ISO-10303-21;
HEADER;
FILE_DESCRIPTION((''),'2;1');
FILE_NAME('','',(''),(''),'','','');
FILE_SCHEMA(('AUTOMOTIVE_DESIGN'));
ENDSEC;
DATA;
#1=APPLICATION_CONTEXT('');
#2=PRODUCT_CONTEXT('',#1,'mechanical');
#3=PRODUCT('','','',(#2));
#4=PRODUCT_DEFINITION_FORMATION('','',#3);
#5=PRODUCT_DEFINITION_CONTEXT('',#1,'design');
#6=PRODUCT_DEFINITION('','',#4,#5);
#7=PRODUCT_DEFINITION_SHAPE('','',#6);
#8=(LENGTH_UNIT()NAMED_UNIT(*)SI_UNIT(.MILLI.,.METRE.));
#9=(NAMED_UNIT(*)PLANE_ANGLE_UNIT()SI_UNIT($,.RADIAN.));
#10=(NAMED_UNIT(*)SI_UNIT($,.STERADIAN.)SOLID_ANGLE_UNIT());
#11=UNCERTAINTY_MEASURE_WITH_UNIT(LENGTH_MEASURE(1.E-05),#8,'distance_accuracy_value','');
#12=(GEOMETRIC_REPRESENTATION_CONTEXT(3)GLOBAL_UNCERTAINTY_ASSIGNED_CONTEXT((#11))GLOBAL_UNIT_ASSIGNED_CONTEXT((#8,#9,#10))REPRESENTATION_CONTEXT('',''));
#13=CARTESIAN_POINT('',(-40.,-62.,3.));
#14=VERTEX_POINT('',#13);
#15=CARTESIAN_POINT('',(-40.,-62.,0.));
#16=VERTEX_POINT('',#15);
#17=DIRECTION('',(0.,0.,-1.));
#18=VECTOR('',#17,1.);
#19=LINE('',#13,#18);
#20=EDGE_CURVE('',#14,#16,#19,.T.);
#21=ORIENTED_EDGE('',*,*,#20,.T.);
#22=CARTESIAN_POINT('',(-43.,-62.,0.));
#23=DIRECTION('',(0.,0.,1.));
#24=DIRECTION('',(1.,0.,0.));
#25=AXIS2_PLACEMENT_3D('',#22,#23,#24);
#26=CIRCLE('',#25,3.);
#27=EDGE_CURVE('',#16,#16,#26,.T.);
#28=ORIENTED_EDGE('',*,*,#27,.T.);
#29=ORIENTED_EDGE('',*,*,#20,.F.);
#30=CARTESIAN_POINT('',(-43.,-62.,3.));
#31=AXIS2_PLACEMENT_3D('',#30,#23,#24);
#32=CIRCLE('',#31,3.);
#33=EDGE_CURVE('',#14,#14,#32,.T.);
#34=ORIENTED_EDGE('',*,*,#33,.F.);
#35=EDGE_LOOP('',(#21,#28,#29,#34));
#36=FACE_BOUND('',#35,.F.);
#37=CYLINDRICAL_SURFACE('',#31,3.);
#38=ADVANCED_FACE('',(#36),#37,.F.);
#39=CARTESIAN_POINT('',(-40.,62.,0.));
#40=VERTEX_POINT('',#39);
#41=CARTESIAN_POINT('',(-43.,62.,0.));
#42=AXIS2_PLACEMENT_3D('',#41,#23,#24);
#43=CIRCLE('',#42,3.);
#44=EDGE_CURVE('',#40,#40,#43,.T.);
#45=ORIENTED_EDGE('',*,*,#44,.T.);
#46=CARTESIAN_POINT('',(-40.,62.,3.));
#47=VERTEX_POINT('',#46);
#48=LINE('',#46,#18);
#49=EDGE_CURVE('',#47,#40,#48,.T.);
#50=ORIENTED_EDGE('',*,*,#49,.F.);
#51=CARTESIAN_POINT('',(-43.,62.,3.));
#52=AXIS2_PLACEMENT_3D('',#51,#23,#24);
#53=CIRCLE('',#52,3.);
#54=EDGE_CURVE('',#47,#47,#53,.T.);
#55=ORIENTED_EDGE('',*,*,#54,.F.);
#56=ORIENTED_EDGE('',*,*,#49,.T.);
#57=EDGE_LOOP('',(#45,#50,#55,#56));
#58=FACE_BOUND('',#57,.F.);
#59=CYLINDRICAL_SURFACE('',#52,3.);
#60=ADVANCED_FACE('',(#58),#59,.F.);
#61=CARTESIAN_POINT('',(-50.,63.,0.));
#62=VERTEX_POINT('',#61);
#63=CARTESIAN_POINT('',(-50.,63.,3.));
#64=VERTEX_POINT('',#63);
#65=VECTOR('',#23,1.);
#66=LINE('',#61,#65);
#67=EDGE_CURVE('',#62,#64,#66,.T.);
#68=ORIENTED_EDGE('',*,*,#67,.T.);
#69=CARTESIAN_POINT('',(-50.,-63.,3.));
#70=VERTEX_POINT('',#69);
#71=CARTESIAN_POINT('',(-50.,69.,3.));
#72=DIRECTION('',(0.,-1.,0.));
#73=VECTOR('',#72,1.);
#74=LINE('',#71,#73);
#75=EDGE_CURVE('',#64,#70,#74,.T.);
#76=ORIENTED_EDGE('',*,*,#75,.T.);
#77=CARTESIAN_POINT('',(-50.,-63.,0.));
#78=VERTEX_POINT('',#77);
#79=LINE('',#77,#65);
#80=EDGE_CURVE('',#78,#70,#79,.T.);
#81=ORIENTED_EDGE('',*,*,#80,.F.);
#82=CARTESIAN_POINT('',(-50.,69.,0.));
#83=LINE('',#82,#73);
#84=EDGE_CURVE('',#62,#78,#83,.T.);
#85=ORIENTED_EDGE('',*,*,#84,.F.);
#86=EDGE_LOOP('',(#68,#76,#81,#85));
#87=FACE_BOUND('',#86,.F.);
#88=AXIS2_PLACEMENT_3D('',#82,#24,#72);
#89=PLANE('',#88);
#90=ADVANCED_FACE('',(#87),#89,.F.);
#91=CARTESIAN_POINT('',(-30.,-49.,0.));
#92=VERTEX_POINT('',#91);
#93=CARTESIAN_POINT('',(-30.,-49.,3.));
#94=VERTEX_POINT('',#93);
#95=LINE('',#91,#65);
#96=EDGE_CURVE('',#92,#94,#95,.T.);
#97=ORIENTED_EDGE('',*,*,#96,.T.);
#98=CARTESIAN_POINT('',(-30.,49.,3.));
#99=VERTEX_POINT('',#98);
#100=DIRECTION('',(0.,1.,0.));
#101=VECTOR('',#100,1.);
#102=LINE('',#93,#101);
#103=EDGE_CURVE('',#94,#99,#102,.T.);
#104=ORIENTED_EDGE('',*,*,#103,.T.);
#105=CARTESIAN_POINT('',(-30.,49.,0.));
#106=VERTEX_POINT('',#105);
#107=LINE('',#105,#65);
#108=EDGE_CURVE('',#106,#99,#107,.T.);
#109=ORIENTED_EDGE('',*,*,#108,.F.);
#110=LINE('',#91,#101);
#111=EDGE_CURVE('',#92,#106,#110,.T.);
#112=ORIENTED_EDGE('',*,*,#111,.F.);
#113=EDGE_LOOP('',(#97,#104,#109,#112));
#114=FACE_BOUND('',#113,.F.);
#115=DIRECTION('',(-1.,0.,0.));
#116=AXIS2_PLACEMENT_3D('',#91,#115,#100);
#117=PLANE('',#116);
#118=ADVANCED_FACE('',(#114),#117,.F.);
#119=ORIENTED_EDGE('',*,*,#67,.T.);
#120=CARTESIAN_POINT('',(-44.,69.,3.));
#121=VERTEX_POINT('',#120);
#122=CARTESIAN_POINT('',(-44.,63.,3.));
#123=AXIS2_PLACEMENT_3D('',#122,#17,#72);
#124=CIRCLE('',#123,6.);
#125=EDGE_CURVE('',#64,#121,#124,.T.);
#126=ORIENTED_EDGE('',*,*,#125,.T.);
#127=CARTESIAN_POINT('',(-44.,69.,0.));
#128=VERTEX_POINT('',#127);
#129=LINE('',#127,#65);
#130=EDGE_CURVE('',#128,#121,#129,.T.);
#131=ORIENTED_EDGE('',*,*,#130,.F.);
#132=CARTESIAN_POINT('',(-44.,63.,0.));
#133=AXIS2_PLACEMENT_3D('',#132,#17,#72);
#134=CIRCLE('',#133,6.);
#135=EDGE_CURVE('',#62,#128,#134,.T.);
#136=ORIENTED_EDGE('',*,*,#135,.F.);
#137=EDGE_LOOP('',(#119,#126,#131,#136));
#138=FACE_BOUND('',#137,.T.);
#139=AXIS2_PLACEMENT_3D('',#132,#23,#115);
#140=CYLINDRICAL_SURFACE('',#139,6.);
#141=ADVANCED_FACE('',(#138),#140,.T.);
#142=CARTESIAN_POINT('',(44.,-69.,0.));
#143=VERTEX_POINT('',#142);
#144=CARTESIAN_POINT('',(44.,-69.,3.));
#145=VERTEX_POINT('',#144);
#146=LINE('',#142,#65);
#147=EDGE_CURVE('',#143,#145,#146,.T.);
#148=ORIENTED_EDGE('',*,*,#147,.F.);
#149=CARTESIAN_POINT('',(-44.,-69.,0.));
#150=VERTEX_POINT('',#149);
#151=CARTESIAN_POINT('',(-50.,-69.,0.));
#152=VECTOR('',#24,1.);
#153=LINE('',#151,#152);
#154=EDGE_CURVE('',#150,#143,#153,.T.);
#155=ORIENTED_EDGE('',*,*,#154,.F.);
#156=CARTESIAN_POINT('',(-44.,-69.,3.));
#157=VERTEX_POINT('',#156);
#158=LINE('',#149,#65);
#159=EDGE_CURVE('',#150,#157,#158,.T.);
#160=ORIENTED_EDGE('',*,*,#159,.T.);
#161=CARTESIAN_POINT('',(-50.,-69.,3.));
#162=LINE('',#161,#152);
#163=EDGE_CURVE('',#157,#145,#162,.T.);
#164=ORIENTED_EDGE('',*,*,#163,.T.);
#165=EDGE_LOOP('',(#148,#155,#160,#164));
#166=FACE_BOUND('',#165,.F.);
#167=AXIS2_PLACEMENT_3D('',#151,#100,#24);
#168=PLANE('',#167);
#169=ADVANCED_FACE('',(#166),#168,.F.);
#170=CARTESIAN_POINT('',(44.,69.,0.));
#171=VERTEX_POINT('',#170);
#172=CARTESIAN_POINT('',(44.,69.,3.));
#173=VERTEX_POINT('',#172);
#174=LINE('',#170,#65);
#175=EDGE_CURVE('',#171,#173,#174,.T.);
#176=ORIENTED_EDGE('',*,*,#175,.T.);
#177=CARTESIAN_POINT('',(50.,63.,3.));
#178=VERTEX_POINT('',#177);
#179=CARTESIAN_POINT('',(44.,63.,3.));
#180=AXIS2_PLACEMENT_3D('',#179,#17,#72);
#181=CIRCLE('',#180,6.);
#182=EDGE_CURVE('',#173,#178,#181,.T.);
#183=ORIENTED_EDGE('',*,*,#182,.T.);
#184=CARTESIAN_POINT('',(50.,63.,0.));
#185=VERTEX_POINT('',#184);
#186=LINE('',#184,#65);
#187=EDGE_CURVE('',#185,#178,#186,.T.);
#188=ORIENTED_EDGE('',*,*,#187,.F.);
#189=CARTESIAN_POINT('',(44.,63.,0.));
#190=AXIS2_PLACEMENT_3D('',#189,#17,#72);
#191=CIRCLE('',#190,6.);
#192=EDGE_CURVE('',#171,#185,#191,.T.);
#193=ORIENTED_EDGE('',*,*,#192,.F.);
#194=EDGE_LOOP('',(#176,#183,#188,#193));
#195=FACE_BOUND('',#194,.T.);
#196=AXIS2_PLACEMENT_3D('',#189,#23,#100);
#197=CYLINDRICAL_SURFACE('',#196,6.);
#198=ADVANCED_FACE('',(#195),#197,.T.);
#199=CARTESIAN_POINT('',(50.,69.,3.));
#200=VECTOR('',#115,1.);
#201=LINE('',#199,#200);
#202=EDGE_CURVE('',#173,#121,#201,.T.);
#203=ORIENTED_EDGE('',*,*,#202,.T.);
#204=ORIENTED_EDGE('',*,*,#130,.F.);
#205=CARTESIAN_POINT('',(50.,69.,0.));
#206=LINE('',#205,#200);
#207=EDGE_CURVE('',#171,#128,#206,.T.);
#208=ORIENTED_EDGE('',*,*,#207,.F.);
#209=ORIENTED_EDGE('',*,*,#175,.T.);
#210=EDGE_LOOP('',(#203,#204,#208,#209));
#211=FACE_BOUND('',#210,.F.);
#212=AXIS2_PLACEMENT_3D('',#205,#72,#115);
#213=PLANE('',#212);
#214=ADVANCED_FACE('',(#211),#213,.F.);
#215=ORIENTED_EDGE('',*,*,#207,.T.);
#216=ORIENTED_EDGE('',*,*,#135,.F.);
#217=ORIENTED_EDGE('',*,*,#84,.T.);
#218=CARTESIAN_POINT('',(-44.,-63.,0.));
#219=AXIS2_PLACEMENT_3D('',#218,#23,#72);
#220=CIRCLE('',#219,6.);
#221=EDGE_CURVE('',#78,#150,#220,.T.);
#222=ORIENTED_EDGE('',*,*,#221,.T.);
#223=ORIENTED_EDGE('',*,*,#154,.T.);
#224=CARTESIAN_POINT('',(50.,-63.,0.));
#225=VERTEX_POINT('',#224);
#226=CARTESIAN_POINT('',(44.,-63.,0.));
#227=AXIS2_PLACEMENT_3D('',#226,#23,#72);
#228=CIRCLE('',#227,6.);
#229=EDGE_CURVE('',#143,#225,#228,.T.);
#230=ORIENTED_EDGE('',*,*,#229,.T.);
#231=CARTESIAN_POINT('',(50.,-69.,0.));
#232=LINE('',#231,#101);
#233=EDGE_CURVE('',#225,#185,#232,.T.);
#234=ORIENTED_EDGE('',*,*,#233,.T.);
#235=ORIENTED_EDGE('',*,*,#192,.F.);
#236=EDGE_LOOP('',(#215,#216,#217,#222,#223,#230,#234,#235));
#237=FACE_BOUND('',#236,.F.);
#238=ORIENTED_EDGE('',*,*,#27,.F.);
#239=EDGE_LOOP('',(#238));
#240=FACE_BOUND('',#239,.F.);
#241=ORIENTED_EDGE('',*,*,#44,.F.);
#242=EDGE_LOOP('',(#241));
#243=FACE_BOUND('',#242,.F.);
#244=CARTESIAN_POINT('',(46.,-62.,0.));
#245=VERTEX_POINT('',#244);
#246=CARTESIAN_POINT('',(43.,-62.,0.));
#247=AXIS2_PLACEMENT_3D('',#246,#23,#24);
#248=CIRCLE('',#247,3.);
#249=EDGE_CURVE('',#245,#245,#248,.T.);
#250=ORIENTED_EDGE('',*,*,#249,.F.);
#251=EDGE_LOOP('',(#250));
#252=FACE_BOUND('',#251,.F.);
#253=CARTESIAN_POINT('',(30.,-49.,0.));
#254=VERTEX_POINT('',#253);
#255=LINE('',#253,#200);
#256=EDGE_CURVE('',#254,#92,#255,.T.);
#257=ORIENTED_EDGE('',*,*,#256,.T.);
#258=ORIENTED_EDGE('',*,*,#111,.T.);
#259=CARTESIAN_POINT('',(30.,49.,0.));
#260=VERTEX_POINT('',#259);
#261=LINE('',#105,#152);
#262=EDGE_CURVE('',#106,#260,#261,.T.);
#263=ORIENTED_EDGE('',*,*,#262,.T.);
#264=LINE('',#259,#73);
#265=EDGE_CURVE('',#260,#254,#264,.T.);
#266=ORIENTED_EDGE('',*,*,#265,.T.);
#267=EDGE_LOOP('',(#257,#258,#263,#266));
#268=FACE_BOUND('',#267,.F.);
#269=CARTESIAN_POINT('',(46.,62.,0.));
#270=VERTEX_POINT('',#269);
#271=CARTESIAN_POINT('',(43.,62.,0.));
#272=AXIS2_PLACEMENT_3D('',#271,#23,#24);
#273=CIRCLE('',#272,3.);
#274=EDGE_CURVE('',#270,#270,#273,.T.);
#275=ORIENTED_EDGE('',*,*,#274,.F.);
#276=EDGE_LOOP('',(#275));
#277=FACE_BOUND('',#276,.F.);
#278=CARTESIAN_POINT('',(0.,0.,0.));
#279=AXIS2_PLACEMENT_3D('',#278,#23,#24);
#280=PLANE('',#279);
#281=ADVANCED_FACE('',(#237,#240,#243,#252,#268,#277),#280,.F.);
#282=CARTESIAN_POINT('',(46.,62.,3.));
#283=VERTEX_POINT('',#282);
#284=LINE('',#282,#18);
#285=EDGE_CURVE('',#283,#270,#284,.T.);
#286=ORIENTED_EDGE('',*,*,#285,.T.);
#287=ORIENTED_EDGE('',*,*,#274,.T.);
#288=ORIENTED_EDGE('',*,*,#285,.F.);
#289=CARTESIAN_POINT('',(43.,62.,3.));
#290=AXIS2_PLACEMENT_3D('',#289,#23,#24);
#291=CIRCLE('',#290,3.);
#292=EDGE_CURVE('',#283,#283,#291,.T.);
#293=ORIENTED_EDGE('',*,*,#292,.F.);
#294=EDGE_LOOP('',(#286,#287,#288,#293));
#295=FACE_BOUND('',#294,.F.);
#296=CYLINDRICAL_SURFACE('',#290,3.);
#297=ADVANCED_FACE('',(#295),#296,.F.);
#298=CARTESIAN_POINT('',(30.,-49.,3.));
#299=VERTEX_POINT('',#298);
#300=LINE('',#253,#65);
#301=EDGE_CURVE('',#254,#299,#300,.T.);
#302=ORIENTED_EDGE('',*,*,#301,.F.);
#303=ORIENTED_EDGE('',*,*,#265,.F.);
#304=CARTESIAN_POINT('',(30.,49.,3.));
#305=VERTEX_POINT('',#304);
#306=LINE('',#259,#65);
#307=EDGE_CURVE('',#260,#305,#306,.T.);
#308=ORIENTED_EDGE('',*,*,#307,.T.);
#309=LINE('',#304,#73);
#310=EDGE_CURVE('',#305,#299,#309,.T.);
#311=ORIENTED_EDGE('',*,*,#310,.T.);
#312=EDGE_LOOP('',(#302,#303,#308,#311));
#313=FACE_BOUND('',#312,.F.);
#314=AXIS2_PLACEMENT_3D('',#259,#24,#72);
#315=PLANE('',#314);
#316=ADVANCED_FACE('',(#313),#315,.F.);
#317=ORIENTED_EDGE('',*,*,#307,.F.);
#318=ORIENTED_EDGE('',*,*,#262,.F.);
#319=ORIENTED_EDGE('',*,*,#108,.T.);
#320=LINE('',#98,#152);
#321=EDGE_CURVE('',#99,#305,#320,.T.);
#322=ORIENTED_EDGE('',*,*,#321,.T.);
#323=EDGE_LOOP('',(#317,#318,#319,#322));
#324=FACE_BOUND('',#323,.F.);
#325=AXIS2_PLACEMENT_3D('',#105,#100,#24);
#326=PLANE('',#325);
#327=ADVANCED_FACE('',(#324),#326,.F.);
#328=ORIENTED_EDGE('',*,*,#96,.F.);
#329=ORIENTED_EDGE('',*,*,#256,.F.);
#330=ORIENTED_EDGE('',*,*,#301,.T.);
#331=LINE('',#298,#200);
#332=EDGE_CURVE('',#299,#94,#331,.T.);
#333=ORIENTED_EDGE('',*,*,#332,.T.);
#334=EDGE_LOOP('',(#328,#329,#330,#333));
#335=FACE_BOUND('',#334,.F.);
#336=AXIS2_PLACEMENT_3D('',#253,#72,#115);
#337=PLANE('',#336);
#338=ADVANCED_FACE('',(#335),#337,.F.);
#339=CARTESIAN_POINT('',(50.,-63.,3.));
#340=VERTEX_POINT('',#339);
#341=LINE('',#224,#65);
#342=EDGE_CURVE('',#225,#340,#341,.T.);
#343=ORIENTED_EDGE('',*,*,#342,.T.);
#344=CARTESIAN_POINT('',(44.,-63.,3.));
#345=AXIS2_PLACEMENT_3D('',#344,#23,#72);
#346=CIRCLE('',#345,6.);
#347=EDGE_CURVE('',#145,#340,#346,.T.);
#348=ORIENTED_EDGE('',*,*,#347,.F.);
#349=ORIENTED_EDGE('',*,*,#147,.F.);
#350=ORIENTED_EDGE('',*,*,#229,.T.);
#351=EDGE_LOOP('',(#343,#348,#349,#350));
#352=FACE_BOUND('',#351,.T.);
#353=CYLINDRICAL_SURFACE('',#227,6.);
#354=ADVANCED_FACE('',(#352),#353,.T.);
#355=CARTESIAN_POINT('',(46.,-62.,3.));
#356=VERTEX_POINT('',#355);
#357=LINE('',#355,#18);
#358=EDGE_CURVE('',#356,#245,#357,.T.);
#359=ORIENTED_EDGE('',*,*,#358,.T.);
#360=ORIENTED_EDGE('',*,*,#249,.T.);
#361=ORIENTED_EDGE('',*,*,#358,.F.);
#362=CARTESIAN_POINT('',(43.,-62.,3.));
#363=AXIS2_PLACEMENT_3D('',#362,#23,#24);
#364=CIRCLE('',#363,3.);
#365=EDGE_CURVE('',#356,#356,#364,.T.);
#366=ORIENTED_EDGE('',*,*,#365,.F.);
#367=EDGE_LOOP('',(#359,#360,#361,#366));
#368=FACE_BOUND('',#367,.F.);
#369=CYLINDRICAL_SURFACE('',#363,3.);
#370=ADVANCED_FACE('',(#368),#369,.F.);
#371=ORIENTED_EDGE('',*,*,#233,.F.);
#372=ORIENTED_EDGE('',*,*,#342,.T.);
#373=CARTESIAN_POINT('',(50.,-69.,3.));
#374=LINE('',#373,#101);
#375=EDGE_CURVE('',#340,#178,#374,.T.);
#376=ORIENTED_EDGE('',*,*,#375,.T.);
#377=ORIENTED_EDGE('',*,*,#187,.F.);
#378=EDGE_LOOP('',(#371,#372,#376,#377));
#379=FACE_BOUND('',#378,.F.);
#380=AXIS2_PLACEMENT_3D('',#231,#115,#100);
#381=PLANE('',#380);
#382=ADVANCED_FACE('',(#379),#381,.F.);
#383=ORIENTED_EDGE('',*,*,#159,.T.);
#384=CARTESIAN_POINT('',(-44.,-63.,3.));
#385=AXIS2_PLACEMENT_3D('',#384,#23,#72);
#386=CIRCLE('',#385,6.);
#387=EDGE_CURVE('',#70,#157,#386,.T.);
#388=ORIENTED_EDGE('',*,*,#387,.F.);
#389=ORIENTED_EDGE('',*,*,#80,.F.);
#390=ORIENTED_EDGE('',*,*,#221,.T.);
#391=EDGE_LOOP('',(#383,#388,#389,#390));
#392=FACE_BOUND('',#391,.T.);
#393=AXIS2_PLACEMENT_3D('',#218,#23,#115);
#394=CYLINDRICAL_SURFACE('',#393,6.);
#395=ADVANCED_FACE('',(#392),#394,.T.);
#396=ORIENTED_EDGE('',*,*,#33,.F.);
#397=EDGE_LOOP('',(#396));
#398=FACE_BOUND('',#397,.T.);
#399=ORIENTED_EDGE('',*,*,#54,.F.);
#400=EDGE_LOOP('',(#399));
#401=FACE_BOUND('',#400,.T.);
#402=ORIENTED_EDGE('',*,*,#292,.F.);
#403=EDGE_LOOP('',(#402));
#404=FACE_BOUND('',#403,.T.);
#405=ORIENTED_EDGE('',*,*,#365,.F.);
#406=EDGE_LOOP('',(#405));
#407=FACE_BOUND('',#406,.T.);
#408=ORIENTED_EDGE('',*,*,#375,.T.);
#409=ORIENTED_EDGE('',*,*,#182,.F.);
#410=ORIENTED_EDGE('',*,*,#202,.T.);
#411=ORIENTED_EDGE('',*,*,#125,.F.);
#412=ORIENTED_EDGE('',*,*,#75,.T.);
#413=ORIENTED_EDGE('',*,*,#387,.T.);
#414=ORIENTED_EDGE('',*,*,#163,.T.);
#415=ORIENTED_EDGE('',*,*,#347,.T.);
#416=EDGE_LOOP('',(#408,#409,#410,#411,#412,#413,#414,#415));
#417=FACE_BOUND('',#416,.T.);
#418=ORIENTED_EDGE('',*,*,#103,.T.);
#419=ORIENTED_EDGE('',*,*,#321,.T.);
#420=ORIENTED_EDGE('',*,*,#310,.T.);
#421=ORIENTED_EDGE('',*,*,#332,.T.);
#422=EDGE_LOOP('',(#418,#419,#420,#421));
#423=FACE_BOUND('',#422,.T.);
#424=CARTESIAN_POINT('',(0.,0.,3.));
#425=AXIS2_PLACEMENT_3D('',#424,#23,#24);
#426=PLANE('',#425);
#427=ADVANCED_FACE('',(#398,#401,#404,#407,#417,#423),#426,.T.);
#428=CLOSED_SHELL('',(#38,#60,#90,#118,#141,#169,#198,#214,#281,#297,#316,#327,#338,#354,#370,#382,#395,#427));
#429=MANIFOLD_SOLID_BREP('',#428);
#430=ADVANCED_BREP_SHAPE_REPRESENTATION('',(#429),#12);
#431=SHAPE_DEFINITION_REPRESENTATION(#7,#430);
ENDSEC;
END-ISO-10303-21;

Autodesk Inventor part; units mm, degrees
ref_plane "YZ Plane" through (0, 0, 0) normal (1, 0, 0) x (0, 1, 0)
ref_plane "XZ Plane" through (0, 0, 0) normal (0, 1, 0) x (-1, 0, 0)
ref_plane "XY Plane" through (0, 0, 0) normal (0, 0, 1) x (1, 0, 0)
sketch "Sketch1" plane through (0, 0, 0) normal (0, 0, 1) x (1, 0, 0)
  line L0 (-50, -69) -> (50, -69)
  line L1 (50, -69) -> (50, 69)
  line L2 (50, 69) -> (-50, 69)
  line L3 (-50, 69) -> (-50, -69)
  line L4 (-50, -69) -> (50, 69) construction
  line L5 (50, -69) -> (-50, 69) construction
  line L6 (30, -49) -> (-30, -49)
  line L7 (-30, -49) -> (-30, 49)
  line L8 (-30, 49) -> (30, 49)
  line L9 (30, 49) -> (30, -49)
  line L10 (30, -49) -> (-30, 49) construction
  line L11 (-30, -49) -> (30, 49) construction
  point P0 (0, 0)
  dimension "d172" = 60
  dimension "d180" = 20
  dimension "d181" = 20
  dimension "d182" = 98
extrude "Plate5" add sketch "Sketch1" along normal blind 3
sketch "Sketch9" plane through (0, 0, 3) normal (0, 0, 1) x (1, 0, 0)
  circle A0 centre (43, -62) radius 3
  line L0 (43, 62) -> (-43, 62) construction
  line L1 (-43, 62) -> (-43, -62) construction
  line L2 (-43, -62) -> (43, -62) construction
  line L3 (43, -62) -> (43, 62) construction
  line L4 (43, 62) -> (-43, -62) construction
  line L5 (-43, 62) -> (43, -62) construction
  circle A1 centre (-43, -62) radius 3
  circle A2 centre (43, 62) radius 3
  circle A3 centre (-43, 62) radius 3
  line L6 (-30, -49) -> (-30, 49) projected
  line L7 (-30, 49) -> (30, 49) projected
  line L8 (30, 49) -> (30, -49) projected
  line L9 (30, -49) -> (-30, -49) projected
  line L10 (50, -69) -> (-50, -69) projected
  line L11 (50, 69) -> (50, -69) projected
  line L12 (-50, 69) -> (50, 69) projected
  line L13 (-50, -69) -> (-50, 69) projected
  circle A4 centre (-43, 0) radius 3 construction
  circle A5 centre (43, 0) radius 3 construction
  point P0 (0, 0)
  dimension "d174" = 6
  dimension "d183" = 7
  dimension "d184" = 7
extrude "Cut2" cut sketch "Sketch9" against normal blind 3 contours A0 | A1 | A2 | A3
fillet "Corner Round1" radius 6 4 edges at (50, 69, 1.5) (-50, 69, 1.5) (-50, -69, 1.5) (50, -69, 1.5)
properties part number "PRS 1200-51 FDS Diam way flange 1" material "Stainless Steel"
